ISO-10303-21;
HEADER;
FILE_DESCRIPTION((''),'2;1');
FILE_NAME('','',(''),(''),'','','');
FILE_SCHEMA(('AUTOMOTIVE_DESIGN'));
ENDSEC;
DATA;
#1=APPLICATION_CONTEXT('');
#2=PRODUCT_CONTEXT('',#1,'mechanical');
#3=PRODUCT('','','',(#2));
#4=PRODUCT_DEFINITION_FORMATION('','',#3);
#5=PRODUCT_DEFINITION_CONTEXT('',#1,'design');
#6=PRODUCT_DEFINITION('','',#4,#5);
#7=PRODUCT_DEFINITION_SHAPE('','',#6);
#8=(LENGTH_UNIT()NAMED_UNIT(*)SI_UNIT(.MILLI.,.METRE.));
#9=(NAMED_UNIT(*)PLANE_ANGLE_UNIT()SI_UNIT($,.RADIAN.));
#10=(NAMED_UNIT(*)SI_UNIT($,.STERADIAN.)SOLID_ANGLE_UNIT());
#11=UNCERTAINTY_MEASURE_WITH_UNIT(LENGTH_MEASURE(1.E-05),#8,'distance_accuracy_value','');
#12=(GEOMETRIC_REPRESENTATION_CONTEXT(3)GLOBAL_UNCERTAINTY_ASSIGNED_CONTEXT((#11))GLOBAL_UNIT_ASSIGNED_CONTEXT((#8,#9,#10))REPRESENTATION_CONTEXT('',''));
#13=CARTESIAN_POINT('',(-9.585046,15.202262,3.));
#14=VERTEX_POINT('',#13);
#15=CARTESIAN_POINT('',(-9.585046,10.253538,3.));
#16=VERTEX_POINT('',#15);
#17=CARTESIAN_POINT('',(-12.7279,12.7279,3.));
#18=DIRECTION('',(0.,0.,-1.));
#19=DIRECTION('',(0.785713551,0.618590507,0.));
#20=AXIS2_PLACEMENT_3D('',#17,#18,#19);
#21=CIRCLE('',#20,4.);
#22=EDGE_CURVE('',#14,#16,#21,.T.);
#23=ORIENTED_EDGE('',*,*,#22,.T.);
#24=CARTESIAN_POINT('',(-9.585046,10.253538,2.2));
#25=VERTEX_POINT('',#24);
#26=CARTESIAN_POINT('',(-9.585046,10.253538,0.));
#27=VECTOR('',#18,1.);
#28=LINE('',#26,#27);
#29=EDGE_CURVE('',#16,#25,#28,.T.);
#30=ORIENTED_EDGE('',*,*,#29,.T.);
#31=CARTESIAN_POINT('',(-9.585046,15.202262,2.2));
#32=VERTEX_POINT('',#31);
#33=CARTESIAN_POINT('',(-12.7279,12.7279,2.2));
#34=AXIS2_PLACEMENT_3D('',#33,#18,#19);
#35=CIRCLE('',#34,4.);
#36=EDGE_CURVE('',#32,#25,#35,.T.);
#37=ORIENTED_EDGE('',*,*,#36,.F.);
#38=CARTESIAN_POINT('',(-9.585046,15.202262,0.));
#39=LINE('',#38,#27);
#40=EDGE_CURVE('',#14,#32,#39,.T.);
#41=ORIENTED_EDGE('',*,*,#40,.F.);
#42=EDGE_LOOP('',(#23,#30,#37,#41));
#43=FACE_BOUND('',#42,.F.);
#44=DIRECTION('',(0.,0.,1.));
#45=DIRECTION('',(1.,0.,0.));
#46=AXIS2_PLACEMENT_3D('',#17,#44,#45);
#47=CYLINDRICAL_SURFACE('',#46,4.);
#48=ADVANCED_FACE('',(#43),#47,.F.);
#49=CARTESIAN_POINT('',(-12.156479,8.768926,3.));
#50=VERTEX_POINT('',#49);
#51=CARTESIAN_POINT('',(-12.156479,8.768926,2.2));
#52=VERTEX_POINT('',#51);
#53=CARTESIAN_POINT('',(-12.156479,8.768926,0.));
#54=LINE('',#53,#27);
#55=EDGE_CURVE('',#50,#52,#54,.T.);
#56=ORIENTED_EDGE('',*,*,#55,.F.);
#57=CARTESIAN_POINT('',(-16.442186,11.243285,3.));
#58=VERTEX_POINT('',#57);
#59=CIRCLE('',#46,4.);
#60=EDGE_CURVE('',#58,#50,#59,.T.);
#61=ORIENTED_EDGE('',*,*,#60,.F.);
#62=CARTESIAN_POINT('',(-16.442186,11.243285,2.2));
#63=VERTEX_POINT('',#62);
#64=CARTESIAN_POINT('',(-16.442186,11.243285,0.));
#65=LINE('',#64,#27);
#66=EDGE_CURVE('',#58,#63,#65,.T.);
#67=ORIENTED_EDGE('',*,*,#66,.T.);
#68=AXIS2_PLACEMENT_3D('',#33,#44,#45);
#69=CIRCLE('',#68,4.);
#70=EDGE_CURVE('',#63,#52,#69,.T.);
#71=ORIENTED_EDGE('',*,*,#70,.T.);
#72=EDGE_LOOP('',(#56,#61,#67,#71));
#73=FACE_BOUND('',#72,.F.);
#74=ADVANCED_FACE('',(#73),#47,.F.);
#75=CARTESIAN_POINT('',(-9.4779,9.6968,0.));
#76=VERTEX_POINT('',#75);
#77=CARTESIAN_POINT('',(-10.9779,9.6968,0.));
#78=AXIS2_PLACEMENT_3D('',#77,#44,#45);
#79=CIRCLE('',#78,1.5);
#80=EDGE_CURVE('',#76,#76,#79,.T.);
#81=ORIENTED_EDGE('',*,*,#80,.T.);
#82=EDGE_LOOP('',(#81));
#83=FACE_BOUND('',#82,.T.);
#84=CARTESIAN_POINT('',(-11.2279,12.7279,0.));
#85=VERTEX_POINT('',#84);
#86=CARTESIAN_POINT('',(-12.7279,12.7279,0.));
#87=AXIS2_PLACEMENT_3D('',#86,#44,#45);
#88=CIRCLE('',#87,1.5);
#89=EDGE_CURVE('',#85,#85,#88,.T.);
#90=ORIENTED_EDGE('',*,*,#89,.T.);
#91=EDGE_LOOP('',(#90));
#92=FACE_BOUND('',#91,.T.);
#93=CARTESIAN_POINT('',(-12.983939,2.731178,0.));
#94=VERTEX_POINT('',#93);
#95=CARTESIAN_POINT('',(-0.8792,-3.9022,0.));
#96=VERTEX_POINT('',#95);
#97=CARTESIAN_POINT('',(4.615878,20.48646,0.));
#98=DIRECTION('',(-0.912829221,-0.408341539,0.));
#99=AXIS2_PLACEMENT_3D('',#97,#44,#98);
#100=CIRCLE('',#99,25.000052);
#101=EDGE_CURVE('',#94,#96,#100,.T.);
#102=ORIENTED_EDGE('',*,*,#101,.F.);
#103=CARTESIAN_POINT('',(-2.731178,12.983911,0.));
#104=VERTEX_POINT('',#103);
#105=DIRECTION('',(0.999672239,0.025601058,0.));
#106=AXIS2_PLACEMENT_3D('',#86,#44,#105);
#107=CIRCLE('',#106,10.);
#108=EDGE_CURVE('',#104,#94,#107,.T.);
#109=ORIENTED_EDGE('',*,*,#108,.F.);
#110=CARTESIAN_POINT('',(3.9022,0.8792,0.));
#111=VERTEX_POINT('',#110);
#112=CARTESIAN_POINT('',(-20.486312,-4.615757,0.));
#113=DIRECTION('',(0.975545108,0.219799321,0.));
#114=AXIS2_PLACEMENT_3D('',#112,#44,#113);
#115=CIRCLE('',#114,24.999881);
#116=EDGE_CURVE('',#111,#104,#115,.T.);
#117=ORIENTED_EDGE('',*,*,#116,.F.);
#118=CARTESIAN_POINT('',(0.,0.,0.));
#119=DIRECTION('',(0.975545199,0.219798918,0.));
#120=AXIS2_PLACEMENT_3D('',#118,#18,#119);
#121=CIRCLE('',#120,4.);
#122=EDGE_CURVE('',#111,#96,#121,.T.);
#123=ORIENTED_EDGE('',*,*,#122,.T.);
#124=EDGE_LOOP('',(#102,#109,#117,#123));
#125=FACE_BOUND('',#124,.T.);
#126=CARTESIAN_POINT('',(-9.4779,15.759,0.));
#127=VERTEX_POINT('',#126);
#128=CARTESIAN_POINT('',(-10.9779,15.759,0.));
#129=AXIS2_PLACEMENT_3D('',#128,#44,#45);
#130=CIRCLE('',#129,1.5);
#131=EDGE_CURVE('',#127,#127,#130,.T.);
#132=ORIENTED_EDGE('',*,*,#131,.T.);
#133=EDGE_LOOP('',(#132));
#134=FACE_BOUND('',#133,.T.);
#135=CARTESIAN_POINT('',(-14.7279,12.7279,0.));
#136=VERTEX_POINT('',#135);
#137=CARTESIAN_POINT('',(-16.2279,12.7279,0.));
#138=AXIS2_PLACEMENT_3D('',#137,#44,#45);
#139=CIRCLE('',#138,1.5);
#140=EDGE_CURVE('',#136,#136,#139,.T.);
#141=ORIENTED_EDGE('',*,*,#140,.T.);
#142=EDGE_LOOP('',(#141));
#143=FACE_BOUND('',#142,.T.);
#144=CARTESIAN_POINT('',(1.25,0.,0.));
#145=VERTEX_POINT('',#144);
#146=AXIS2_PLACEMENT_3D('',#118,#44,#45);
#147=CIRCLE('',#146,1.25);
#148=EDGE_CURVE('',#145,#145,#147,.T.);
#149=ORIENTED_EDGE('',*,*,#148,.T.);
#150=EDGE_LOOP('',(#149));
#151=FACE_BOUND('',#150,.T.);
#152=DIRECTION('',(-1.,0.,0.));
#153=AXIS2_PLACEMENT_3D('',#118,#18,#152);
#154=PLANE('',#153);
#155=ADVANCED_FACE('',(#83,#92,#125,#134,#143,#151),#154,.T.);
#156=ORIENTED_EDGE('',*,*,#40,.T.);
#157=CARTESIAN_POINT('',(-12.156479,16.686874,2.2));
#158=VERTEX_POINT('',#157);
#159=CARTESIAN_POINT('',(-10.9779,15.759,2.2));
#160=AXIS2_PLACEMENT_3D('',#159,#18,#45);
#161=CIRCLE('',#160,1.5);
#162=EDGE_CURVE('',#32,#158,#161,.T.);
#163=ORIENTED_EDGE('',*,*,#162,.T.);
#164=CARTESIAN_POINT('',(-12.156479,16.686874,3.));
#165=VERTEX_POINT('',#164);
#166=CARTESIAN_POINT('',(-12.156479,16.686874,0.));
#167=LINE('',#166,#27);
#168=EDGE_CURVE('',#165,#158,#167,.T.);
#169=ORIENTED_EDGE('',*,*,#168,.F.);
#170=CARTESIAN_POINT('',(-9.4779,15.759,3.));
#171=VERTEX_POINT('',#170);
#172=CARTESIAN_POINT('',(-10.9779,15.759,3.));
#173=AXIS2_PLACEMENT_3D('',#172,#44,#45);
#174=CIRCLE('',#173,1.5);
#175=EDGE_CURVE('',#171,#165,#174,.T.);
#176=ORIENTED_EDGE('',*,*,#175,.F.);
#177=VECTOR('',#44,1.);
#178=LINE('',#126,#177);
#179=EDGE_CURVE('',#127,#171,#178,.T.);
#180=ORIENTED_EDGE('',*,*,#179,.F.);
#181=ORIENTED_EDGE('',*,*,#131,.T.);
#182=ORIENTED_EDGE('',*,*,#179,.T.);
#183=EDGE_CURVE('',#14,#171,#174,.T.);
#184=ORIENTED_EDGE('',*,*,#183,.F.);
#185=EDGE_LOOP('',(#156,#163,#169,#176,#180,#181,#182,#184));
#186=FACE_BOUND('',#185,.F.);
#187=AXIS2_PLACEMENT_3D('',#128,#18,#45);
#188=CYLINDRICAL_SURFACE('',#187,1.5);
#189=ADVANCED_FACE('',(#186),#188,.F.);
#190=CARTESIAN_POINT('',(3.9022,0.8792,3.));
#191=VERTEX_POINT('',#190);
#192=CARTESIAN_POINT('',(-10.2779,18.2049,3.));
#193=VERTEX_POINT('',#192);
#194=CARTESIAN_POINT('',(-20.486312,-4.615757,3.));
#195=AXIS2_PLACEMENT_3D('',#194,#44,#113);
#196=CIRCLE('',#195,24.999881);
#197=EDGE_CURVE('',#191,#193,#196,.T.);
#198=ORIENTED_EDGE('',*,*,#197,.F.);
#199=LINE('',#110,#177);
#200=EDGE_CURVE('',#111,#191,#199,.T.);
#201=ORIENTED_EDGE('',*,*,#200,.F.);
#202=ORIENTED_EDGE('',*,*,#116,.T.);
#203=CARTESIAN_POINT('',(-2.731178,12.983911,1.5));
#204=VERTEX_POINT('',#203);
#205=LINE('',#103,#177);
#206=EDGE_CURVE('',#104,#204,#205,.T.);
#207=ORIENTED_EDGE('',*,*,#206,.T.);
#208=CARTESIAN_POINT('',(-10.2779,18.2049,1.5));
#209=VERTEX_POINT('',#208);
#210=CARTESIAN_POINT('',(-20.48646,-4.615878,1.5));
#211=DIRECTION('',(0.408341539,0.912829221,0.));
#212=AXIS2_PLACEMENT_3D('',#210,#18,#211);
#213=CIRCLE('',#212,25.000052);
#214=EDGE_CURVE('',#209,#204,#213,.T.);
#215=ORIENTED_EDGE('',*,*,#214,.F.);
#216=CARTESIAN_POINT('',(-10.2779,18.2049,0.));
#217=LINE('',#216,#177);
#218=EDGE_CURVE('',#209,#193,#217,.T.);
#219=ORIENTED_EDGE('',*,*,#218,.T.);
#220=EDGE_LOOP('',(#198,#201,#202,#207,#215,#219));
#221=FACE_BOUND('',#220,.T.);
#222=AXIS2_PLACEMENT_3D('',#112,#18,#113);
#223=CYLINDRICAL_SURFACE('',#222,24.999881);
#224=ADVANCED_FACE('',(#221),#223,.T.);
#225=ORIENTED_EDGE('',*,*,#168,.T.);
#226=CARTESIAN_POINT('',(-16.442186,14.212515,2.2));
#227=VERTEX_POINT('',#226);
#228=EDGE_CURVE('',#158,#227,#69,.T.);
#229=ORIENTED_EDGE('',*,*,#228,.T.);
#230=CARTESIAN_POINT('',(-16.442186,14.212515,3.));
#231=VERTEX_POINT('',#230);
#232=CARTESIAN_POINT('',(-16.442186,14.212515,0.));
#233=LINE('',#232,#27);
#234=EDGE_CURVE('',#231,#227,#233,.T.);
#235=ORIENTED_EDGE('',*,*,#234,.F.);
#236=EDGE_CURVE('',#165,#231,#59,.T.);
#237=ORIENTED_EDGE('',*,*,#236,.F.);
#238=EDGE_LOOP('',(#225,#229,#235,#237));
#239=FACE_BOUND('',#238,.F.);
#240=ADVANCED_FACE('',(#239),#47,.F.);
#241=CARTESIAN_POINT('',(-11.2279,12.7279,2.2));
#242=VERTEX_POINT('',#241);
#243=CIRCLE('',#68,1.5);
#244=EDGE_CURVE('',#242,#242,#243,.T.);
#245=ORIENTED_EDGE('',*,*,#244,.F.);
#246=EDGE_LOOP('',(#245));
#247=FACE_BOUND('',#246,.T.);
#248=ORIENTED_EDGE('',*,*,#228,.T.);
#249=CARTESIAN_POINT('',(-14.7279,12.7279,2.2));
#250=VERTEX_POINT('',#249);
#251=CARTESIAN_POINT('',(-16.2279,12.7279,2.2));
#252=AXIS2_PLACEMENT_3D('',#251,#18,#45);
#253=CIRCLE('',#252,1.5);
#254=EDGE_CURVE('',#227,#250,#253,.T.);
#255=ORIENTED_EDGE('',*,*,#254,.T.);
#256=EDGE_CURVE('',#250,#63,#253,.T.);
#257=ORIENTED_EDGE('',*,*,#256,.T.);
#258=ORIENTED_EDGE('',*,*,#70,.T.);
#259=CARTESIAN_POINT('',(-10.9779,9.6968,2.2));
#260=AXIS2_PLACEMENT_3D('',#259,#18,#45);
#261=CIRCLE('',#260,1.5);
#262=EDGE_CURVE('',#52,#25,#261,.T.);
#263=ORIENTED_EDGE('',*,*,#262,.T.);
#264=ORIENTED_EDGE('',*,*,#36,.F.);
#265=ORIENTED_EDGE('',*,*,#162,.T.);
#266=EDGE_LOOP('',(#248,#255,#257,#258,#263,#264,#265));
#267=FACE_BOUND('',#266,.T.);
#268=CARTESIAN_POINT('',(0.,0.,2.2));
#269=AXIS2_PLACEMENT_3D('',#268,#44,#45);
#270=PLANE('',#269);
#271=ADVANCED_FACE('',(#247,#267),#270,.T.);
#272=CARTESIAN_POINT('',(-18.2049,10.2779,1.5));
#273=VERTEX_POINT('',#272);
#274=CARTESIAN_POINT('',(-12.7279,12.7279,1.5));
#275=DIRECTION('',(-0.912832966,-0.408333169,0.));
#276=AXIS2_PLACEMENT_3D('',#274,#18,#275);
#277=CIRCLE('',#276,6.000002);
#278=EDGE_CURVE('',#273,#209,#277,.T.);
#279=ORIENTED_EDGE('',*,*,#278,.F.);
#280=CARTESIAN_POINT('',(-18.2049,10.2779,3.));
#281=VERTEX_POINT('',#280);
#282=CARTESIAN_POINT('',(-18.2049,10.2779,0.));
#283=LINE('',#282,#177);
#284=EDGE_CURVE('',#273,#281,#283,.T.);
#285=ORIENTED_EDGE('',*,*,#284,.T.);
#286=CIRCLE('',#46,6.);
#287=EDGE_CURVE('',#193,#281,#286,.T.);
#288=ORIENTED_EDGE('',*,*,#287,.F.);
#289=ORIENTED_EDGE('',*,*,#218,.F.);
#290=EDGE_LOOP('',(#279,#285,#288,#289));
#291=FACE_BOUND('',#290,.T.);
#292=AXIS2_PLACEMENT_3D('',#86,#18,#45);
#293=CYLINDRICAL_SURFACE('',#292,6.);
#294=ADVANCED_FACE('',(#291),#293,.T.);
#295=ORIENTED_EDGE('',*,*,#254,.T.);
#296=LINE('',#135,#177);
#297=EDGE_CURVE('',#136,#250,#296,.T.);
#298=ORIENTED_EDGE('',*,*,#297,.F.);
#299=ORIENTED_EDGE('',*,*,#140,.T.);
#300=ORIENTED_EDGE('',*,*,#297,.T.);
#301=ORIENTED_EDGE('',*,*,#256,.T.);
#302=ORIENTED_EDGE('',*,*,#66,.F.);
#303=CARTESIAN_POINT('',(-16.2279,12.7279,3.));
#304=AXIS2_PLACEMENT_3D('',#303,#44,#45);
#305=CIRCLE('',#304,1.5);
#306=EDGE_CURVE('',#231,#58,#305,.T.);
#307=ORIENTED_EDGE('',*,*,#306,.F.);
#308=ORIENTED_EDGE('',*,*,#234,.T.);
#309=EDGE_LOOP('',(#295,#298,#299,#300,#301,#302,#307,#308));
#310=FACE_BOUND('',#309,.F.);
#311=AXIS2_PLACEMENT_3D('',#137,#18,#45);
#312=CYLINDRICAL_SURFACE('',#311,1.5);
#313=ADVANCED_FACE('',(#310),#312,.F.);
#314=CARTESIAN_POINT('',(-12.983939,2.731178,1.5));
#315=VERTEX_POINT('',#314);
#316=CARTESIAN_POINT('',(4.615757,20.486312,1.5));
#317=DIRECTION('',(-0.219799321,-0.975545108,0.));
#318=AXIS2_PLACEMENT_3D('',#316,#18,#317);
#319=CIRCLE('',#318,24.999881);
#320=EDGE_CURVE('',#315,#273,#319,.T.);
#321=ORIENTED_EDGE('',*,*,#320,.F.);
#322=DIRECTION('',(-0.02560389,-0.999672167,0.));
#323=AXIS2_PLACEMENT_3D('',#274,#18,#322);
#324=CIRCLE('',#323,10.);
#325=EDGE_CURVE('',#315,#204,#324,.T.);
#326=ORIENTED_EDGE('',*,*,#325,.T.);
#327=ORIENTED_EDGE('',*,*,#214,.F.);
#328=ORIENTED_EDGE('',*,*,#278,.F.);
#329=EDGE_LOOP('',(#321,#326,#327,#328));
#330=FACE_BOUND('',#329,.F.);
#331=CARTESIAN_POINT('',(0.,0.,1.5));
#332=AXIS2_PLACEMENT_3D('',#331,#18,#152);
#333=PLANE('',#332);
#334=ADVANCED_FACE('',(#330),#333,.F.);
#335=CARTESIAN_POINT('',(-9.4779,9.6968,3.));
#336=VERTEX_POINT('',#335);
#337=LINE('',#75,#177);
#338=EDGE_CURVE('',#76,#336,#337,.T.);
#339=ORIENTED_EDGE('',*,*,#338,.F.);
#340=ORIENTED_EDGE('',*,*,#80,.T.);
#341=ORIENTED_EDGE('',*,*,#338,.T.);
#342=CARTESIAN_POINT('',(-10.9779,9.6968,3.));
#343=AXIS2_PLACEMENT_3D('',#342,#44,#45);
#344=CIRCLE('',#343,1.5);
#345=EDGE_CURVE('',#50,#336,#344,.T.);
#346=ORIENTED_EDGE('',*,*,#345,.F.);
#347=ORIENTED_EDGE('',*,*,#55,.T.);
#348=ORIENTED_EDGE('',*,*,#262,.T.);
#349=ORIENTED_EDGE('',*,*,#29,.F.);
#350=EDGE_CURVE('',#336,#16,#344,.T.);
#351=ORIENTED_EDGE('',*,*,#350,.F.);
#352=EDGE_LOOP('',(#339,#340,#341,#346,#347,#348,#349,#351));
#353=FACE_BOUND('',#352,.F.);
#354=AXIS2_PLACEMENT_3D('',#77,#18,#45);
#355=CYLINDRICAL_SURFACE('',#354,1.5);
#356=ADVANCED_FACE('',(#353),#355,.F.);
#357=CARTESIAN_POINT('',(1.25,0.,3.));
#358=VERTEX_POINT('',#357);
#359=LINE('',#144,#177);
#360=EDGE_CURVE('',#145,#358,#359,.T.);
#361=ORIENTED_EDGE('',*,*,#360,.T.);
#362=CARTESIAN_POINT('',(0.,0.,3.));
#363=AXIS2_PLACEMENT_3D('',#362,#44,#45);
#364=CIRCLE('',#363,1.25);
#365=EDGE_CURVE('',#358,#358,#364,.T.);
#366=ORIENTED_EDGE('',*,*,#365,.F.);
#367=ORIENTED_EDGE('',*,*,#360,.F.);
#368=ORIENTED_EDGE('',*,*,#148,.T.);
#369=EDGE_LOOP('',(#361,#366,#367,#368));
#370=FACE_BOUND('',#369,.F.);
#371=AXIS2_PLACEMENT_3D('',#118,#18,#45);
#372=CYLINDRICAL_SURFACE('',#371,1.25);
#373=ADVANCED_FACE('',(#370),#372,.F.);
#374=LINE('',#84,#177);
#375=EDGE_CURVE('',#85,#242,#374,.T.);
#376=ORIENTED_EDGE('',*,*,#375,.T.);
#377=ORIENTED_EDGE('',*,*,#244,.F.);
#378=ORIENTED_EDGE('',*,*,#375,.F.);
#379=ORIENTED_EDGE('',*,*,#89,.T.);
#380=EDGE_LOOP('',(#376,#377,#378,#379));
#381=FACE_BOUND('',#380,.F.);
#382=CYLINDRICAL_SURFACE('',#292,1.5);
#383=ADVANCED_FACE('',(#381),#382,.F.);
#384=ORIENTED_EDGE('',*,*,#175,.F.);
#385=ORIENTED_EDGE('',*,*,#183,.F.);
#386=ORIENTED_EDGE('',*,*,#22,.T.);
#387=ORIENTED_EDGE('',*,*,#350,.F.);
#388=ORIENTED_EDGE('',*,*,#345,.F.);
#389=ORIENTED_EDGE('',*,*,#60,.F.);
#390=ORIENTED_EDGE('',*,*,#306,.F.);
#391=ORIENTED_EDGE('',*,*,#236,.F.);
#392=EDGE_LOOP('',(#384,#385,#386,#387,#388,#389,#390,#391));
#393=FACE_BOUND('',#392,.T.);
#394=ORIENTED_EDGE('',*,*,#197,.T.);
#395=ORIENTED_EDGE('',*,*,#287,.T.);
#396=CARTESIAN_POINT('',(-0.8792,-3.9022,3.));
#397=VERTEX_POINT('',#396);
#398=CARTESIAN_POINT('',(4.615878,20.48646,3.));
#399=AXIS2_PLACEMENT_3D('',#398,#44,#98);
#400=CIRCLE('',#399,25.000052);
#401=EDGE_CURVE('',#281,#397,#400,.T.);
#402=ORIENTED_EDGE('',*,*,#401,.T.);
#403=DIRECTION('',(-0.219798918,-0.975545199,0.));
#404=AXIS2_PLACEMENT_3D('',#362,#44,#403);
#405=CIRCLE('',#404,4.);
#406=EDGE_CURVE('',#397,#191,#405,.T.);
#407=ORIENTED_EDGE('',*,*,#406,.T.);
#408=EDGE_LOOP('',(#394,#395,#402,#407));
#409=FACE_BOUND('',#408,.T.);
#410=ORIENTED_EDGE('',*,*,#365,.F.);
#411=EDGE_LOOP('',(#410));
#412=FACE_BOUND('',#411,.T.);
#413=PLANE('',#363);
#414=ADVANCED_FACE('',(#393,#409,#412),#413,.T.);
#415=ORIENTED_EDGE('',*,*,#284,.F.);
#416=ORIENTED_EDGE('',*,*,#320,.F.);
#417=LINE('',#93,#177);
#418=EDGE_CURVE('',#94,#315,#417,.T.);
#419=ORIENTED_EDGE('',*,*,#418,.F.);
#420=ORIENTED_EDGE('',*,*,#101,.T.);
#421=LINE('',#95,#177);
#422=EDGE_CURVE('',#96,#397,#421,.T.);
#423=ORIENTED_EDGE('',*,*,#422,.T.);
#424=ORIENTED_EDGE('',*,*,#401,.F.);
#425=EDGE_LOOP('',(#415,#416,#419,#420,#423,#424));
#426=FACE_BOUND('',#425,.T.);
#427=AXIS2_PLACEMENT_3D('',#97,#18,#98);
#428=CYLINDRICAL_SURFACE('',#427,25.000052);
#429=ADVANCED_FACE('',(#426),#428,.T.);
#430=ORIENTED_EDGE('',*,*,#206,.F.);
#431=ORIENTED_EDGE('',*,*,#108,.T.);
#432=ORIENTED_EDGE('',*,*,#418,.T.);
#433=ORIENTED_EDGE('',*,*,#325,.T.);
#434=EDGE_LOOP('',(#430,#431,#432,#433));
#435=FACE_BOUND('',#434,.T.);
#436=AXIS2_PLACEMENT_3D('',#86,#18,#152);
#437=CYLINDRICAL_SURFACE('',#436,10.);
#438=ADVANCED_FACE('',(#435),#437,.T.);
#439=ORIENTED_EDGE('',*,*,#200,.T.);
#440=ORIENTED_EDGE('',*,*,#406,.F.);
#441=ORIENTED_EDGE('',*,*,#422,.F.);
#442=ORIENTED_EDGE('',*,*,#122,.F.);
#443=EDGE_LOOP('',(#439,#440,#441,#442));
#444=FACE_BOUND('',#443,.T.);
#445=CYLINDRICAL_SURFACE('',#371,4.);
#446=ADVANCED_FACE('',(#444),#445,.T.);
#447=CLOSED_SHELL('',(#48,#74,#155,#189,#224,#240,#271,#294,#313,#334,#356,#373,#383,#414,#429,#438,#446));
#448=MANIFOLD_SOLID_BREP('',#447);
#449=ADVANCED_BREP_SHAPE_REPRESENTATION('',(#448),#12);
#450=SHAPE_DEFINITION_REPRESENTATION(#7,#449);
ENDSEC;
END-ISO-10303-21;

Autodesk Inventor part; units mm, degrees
ref_plane "YZ Plane" through (0, 0, 0) normal (1, 0, 0) x (0, 1, 0)
ref_plane "XZ Plane" through (0, 0, 0) normal (0, 1, 0) x (-1, 0, 0)
ref_plane "XY Plane" through (0, 0, 0) normal (0, 0, 1) x (1, 0, 0)
sketch "スケッチ1" plane through (0, 0, 0) normal (0, 0, 1) x (1, 0, 0)
  circle A0 centre (-10.9779, 15.759) radius 1.5
  circle A1 centre (-12.7279, 12.7279) radius 1.25
  circle A2 centre (-16.2279, 12.7279) radius 1.5
  circle A3 centre (-10.9779, 9.6968) radius 1.5
  circle A4 centre (-12.7279, 12.7279) radius 6
  circle A5 centre (0, 0) radius 4
  circle A6 centre (0, 0) radius 1.25
  arc A7 (3.9022, 0.8792) -> (-10.2779, 18.2049) centre (-20.4864, -4.6158) ccw
  arc A8 (-18.2049, 10.2779) -> (-0.8792, -3.9022) centre (4.6158, 20.4864) ccw
  circle A9 centre (-12.7279, 12.7279) radius 1.5
  circle A10 centre (-16.2279, 12.7279) radius 1.5
  circle A11 centre (-12.7279, 12.7279) radius 1.25
  circle A12 centre (-10.9779, 9.6968) radius 1.5
  circle A13 centre (-10.9779, 15.759) radius 1.5
  circle A14 centre (-12.7279, 12.7279) radius 6
  circle A15 centre (0, 0) radius 4
  circle A16 centre (0, 0) radius 1.25
  arc A17 (3.9022, 0.8792) -> (-10.2779, 18.2049) centre (-20.4864, -4.6158) ccw
  arc A18 (-18.2049, 10.2779) -> (-0.8792, -3.9022) centre (4.6158, 20.4864) ccw
  circle A19 centre (-12.7279, 12.7279) radius 1.5
  dimension "d0" = 8
  dimension "d1" = 2.5
  dimension "d2" = 25
  dimension "d3" = 3
  dimension "d6" = 8
  dimension "d7" = 2.5
  dimension "d8" = 25
  dimension "d9" = 3
  dimension "d19" = 3
  dimension "d20" = 2.5
extrude "押し出し1" add sketch "スケッチ1" along normal blind 3 contours A4 | A4 A7 A5 A8 | A5
sketch "スケッチ2" plane through (0, 0, 3) normal (0, 0, 1) x (1, 0, 0)
  circle A0 centre (-12.7279, 12.7279) radius 1.5 projected
  circle A1 centre (-12.7279, 12.7279) radius 4
  point P0 (0, 0)
  dimension "d10" = 8
extrude "押し出し2" cut sketch "スケッチ2" against normal blind 0.8
sketch "スケッチ3" plane through (0, 0, 0) normal (0, 0, -1) x (-1, 0, 0)
  circle A0 centre (12.7279, 12.7279) radius 1.5 projected
  circle A1 centre (12.7279, 12.7279) radius 10
  arc A2 (0.8792, -3.9022) -> (18.2049, 10.2779) centre (-4.6158, 20.4864) ccw projected
  arc A3 (18.2049, 10.2779) -> (10.2779, 18.2049) centre (12.7279, 12.7279) ccw projected
  arc A4 (10.2779, 18.2049) -> (-3.9022, 0.8792) centre (20.4864, -4.6158) ccw projected
  arc A5 (-3.9022, 0.8792) -> (0.8792, -3.9022) centre (0, 0) ccw projected
  circle A6 centre (0, 0) radius 1.25 projected
  circle A7 centre (16.2279, 12.7279) radius 1.5 projected
  circle A8 centre (12.7279, 12.7279) radius 1.5 projected
  circle A9 centre (10.9779, 9.6968) radius 1.5 projected
  circle A10 centre (10.9779, 15.759) radius 1.5 projected
  point P0 (12.9839, 2.7312)
  point P1 (2.7312, 12.9839)
  dimension "d13" = 20
extrude "押し出し3" add sketch "スケッチ3" against normal blind 1.5 contours A1 A2 A3 A4 picked at (8.342, 18.6804)
equation "\"d1\" = d20"
equation "\"d3\" = d9"
equation "\"d7\" = d1"
equation "\"d9\" = d19"
properties part number "原動節4" material "アルミニウム 2014-T4"
